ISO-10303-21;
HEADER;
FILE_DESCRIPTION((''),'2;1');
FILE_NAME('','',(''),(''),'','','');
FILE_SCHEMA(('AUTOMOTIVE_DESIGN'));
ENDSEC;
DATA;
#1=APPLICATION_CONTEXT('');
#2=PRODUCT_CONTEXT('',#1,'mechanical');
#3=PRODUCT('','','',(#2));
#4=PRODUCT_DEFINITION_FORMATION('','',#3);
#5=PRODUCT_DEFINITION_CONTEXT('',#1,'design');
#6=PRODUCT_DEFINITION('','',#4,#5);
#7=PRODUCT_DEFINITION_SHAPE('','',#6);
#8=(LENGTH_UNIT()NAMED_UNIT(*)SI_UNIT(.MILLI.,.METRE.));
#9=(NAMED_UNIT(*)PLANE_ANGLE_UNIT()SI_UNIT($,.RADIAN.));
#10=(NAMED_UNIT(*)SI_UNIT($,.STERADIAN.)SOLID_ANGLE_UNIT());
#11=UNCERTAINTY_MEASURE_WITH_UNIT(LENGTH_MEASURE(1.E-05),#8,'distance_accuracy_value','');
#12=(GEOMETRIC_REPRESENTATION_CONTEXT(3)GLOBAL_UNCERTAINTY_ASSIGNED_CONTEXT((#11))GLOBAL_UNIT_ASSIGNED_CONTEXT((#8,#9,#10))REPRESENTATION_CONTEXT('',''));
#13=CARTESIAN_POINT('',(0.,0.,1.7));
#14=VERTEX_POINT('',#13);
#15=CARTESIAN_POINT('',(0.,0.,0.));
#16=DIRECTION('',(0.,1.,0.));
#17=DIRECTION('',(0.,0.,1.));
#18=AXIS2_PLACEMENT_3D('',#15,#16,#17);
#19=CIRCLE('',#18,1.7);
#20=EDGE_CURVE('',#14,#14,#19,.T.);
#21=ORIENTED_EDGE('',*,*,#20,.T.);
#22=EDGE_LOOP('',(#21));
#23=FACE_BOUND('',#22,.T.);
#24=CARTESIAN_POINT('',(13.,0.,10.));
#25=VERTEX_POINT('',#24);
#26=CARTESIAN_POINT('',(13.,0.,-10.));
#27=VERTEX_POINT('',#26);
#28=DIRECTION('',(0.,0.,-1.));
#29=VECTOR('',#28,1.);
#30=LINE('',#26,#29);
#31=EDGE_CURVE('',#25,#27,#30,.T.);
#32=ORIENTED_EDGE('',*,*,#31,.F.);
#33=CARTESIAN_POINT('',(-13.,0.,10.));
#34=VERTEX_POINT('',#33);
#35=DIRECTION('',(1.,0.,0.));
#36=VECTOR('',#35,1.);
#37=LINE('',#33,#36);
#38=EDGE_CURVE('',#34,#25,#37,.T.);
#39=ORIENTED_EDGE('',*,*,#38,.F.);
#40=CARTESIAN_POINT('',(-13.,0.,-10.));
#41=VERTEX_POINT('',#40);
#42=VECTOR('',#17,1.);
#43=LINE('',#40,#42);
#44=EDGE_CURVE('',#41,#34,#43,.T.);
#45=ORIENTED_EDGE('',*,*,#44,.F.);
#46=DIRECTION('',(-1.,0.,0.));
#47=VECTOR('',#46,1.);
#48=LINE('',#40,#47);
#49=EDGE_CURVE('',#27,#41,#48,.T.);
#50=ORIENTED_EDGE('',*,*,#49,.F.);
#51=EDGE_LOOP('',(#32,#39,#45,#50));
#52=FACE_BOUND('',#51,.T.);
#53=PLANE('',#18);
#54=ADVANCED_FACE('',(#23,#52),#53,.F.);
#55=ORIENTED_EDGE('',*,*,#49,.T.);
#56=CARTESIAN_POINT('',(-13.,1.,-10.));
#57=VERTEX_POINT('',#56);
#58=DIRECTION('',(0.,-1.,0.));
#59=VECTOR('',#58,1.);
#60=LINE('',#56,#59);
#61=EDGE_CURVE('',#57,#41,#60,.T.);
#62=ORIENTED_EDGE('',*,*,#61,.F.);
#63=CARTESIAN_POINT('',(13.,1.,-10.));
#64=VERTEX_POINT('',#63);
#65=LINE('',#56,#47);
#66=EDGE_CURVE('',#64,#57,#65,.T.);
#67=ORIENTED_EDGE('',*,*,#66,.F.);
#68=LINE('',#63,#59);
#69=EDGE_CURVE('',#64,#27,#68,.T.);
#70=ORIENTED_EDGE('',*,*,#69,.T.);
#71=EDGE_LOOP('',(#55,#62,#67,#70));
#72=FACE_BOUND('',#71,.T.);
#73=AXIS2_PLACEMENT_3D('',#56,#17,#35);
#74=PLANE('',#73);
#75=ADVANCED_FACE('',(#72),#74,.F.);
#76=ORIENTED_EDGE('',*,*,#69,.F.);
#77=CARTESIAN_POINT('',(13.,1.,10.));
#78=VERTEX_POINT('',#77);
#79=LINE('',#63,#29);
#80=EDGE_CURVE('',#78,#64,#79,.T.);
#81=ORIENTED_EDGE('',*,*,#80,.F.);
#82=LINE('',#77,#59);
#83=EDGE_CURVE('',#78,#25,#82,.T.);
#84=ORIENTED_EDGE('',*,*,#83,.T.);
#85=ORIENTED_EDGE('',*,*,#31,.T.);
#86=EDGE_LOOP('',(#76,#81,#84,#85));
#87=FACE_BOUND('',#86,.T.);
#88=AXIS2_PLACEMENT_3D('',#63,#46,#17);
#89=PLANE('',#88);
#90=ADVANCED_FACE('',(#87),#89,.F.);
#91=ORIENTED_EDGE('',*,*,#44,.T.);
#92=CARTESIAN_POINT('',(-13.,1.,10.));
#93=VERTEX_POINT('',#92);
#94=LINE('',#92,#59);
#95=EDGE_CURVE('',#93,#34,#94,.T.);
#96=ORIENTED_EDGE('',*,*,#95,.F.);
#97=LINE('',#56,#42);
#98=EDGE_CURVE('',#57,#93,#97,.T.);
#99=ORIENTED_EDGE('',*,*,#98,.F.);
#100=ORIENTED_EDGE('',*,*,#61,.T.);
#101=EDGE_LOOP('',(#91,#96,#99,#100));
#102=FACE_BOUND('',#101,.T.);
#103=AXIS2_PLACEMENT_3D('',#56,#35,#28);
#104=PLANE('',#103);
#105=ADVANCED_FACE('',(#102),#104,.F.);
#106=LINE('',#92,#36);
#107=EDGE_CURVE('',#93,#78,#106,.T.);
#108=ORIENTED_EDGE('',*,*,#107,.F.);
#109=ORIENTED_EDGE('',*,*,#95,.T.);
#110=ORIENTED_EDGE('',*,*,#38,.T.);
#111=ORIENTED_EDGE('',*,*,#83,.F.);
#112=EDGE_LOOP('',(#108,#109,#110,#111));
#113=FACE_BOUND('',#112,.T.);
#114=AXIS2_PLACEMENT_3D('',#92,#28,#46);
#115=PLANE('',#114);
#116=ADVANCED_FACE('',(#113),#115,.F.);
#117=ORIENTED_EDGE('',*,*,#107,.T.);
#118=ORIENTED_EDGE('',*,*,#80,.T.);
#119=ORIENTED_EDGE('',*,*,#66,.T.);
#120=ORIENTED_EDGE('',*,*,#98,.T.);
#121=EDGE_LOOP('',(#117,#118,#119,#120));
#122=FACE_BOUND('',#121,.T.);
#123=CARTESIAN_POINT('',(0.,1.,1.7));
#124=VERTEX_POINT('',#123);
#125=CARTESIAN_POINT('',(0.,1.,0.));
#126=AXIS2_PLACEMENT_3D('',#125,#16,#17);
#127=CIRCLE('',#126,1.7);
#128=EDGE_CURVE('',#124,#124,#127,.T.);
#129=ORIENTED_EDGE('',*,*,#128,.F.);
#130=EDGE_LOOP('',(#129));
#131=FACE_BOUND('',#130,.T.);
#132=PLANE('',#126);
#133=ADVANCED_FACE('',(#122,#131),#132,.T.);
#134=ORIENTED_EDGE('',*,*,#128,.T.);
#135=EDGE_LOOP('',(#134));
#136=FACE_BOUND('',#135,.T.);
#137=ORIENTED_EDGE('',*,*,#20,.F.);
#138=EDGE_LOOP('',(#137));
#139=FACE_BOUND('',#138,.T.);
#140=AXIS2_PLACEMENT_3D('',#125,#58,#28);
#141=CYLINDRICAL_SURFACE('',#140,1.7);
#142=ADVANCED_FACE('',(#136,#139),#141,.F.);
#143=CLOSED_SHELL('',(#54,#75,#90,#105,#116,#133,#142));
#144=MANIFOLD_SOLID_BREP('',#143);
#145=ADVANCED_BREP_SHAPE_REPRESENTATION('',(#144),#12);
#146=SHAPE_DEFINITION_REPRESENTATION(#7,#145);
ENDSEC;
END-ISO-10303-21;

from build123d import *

# Parameters (mm, degrees)
SK_PAD_W        = 26
SK_PAD_H        = 20
SM_PAD_DEPTH    = 1
SK_SCREW_R      = 1.7
CUT_SCREW_DEPTH = 1


# Sheet-metal steps are written as plain solids
with BuildPart() as part:
    # SK_Pad → SM_Pad (new body)
    with BuildSketch(Plane(origin=(0, 0, 0), x_dir=(1, 0, 0), z_dir=(0, 1, 0))):
        Rectangle(SK_PAD_W, SK_PAD_H)
    extrude(amount=SM_PAD_DEPTH)

    # SK_Screw → CUT_Screw (cut)
    with BuildSketch(Plane(origin=(0, 0, 0), x_dir=(1, 0, 0), z_dir=(0, 1, 0))):
        with Locations(Location((0, 0, 0), (0, 0, 270))):
            Circle(SK_SCREW_R)
    extrude(amount=CUT_SCREW_DEPTH, mode=Mode.SUBTRACT)


solid = part.part
